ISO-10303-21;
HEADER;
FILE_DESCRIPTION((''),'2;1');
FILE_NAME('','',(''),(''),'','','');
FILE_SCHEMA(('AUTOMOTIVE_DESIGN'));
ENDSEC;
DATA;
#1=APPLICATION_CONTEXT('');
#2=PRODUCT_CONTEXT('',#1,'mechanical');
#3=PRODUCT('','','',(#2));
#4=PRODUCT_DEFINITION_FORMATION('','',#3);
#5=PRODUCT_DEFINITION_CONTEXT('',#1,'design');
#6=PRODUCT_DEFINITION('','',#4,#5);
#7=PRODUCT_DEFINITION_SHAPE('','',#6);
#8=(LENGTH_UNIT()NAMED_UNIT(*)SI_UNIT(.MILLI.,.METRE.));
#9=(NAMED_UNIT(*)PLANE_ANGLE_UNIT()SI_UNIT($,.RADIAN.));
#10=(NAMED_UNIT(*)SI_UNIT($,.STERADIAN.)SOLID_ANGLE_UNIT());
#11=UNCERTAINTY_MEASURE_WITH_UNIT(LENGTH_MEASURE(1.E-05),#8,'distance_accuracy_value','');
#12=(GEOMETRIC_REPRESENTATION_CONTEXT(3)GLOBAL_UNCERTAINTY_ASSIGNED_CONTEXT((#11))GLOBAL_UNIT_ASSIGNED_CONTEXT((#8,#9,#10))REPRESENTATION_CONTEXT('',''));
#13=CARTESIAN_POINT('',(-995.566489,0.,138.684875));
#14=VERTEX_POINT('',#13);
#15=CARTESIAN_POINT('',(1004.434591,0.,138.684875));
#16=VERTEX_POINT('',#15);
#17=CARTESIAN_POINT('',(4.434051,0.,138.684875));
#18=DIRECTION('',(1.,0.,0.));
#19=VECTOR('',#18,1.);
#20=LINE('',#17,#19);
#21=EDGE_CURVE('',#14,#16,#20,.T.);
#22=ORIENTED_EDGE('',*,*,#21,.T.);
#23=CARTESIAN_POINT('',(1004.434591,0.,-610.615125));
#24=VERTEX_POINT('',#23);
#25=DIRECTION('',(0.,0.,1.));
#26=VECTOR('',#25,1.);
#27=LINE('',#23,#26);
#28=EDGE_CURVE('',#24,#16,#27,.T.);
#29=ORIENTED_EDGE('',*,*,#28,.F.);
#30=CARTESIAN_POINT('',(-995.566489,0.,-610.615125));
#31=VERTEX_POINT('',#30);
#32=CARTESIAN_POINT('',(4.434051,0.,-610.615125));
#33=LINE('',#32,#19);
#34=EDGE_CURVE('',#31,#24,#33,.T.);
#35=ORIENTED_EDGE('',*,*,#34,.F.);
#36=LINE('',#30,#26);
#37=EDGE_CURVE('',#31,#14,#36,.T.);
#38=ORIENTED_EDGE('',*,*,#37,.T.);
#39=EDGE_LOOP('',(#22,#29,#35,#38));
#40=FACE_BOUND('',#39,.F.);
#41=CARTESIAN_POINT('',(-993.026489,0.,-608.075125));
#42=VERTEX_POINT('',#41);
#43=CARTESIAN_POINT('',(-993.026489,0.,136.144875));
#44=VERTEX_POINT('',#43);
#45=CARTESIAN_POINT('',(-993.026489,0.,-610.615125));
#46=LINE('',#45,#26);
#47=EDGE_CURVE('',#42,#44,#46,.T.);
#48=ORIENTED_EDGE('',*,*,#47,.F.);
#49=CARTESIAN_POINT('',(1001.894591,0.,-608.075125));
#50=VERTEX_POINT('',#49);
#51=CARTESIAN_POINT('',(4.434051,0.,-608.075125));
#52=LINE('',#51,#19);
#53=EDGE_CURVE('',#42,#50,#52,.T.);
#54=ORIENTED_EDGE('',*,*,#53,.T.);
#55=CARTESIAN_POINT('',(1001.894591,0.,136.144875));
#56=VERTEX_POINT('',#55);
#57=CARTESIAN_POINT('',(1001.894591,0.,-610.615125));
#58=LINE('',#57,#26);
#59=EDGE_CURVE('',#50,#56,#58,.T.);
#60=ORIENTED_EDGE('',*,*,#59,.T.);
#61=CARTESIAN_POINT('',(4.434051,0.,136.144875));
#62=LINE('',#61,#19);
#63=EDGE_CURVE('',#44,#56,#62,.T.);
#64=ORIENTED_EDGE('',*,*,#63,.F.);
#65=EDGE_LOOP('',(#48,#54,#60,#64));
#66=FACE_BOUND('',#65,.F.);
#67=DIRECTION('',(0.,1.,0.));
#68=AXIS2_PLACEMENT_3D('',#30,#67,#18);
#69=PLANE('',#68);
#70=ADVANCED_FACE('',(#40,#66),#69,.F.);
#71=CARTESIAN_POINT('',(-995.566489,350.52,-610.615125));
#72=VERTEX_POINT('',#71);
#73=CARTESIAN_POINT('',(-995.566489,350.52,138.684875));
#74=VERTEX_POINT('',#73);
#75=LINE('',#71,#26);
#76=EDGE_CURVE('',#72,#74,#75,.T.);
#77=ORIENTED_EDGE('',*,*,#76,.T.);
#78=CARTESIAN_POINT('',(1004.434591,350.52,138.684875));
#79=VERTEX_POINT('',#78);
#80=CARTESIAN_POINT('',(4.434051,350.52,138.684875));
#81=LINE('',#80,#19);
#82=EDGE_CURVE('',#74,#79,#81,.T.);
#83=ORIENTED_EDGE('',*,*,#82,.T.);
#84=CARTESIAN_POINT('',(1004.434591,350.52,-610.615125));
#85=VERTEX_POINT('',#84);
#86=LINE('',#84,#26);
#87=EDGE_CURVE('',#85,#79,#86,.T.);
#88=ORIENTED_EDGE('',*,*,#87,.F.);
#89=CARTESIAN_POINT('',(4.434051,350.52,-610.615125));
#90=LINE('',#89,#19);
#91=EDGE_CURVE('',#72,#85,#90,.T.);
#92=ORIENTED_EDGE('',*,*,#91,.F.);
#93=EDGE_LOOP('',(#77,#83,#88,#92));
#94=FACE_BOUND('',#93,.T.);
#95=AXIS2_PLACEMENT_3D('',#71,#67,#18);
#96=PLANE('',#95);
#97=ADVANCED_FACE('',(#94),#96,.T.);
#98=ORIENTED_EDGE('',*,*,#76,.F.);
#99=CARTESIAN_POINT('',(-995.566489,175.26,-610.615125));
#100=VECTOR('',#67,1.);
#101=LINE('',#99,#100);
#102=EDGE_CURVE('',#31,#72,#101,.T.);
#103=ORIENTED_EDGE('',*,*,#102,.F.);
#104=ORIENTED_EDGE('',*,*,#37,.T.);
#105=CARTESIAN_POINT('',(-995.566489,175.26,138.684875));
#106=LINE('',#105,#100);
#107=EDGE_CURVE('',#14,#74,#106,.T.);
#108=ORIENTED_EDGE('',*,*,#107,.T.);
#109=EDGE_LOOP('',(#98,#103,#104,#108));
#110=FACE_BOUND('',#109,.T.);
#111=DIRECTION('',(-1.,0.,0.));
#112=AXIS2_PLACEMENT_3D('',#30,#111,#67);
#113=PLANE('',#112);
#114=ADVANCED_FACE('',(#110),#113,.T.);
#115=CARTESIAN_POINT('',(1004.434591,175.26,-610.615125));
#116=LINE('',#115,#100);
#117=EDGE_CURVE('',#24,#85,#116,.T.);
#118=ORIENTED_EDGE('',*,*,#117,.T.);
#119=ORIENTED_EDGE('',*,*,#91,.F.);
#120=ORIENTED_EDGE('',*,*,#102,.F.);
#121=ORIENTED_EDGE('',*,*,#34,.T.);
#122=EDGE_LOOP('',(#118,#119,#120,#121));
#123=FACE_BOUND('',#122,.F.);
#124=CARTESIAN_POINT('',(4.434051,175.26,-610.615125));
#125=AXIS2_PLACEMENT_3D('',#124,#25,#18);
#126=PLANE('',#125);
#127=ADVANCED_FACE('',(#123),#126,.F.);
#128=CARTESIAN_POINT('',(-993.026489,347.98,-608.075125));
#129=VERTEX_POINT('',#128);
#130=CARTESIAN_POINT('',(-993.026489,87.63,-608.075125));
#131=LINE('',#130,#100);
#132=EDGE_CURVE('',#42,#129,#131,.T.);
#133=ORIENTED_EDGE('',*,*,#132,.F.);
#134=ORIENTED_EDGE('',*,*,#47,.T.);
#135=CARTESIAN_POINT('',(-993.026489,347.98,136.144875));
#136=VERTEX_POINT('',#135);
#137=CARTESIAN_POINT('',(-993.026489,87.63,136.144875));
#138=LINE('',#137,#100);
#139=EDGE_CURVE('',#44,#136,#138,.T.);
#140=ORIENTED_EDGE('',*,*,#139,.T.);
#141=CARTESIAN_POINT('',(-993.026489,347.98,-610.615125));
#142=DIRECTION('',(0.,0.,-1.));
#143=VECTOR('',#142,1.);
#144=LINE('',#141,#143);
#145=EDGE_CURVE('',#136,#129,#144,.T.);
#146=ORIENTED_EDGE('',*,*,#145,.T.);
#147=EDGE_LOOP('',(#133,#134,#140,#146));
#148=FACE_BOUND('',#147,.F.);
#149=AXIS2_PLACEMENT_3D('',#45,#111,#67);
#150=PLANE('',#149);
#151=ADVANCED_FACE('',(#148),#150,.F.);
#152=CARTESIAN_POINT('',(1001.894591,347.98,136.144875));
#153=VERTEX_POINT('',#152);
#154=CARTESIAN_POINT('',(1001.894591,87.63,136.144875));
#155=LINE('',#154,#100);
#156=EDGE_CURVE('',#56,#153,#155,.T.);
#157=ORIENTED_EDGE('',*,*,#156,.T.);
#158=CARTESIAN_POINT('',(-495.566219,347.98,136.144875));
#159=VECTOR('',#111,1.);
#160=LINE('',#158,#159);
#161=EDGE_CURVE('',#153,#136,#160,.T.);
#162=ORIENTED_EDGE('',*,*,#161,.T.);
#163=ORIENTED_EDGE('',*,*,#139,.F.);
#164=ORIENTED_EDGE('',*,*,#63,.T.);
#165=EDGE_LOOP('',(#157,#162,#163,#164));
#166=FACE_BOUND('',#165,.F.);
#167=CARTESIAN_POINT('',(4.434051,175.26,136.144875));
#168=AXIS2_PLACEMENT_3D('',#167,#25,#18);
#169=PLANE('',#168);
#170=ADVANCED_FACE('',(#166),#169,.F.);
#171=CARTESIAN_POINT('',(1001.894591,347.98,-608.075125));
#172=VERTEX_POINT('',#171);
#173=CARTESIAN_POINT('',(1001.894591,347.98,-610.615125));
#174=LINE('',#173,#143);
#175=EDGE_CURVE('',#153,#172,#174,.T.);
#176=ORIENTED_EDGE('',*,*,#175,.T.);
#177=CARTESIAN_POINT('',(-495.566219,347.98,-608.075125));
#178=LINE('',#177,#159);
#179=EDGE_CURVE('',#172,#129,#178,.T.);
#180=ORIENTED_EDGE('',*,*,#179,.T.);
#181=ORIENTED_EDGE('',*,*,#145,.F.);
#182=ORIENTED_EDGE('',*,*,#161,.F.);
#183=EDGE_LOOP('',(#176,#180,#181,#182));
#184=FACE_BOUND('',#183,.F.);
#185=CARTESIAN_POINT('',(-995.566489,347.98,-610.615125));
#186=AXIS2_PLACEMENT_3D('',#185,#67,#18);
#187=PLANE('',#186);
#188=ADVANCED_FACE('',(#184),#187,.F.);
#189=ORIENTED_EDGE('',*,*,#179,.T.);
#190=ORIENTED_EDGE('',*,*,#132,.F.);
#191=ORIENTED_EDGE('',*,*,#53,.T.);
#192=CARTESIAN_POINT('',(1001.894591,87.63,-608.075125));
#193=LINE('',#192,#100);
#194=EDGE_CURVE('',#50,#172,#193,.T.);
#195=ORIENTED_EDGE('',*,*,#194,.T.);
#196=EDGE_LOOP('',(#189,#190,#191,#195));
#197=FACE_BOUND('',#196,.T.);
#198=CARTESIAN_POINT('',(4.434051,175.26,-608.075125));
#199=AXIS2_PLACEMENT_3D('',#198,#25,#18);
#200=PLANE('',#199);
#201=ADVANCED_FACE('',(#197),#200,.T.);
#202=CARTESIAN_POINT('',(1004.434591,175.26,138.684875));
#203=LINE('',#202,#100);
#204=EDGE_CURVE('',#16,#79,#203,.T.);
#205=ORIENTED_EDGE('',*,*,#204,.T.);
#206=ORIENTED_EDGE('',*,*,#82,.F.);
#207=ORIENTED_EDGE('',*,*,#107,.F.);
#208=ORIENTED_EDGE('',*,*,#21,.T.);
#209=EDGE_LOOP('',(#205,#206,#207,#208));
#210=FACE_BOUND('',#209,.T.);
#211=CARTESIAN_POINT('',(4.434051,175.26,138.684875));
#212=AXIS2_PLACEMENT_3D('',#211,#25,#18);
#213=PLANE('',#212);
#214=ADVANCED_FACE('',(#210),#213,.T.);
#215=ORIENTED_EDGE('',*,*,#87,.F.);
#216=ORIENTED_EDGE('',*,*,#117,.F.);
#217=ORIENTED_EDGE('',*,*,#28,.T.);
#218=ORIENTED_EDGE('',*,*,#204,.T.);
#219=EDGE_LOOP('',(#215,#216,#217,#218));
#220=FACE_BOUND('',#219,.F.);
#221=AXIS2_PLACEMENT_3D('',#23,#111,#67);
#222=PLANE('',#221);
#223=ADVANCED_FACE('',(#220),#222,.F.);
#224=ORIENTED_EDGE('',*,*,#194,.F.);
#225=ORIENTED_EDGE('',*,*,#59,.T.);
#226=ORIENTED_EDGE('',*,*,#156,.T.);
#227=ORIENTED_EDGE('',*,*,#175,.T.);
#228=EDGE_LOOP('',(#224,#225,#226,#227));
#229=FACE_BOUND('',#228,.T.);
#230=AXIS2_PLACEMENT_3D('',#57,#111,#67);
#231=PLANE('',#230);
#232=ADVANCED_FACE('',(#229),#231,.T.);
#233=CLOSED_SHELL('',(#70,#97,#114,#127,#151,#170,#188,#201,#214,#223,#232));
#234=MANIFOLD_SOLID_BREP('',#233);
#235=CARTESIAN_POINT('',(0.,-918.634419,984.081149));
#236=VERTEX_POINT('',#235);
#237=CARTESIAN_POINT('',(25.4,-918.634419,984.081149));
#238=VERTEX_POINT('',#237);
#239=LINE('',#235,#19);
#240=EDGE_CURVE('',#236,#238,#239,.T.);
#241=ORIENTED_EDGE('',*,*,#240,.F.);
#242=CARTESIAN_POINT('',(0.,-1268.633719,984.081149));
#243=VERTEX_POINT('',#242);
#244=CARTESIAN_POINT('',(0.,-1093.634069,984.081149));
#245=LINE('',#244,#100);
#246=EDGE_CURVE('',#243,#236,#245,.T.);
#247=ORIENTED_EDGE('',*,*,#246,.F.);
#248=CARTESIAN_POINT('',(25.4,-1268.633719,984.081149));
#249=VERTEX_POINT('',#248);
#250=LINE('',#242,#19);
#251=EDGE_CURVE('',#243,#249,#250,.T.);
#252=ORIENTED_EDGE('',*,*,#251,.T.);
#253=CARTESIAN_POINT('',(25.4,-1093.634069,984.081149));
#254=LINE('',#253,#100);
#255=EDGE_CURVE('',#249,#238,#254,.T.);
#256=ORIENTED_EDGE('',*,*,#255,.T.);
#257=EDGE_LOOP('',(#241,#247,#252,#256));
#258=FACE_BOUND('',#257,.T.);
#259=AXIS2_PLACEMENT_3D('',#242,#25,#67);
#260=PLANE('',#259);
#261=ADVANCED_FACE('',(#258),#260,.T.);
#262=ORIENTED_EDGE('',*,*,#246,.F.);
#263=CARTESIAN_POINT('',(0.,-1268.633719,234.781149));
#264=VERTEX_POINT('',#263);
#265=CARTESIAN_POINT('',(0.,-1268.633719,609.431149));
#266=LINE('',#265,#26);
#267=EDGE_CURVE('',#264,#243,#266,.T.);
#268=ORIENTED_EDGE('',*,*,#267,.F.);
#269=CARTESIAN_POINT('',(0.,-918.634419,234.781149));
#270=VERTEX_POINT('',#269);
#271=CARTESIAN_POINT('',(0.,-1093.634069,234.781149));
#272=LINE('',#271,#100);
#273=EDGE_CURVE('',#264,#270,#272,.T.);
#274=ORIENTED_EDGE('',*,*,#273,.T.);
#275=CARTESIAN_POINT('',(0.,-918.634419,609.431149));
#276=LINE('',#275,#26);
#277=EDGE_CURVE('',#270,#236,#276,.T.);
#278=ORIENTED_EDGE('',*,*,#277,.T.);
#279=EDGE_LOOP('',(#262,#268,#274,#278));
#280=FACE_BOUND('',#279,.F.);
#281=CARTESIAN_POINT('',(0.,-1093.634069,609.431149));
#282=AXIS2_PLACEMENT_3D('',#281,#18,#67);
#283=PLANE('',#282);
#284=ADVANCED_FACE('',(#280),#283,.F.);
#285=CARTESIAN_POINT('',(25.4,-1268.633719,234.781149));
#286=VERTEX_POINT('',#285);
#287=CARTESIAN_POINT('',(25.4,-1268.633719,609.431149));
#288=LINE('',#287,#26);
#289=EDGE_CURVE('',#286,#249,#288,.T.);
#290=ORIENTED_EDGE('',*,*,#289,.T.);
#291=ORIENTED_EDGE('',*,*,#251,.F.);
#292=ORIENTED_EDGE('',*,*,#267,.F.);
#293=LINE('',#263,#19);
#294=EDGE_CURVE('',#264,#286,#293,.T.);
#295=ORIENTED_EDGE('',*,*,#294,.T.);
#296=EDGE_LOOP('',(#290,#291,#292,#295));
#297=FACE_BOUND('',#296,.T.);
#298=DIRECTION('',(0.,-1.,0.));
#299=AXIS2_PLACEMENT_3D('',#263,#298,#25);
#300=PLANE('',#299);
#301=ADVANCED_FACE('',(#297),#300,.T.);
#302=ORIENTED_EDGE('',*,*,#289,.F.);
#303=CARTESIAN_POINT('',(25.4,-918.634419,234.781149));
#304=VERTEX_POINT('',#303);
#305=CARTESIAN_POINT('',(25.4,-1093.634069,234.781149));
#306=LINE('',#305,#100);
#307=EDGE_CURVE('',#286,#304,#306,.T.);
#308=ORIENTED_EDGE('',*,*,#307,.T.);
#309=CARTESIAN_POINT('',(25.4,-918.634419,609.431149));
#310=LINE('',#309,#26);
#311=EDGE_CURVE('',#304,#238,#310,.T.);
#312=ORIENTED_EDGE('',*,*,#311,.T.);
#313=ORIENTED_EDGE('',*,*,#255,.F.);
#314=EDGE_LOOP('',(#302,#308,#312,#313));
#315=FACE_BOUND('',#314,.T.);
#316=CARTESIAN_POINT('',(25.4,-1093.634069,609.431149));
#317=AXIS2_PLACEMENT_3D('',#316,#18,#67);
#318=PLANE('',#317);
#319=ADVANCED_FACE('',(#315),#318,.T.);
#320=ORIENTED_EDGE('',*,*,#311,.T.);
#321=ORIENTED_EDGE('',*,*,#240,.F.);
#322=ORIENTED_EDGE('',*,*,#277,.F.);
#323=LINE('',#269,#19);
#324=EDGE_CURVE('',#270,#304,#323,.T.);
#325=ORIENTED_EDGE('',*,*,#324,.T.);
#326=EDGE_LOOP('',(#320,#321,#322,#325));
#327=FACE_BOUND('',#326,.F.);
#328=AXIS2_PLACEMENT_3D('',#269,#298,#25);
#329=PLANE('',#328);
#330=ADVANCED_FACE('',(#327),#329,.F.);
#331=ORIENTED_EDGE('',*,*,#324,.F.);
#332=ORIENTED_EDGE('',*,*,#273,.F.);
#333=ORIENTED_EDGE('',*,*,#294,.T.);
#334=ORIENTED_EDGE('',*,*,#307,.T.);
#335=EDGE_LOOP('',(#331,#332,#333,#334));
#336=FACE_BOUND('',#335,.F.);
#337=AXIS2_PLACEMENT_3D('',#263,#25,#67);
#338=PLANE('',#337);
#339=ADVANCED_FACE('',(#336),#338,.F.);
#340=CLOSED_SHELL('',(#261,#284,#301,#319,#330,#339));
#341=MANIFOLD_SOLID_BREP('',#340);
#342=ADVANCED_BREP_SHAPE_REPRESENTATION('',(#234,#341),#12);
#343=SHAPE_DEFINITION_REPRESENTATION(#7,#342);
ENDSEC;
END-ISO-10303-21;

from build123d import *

# Parameters (mm, degrees)
F1_E0_TOP_W = 2000.00108
F1_E0_TOP_H = 350.52
F2_DEPTH    = 749.3
F3_T        = -2.54
F4_W        = 349.9993
F4_H        = 749.3
F5_DEPTH    = 25.4


with BuildPart() as f2:
    # F1_E0_top (on explicit) → F2 (new body)
    with BuildSketch(Plane(origin=(-995.5664890079, 0, -610.6151250599), x_dir=(1, 0, 0), z_dir=(0, 0, 1))):
        with Locations((1000.00054, 175.26)):
            Rectangle(F1_E0_TOP_W, F1_E0_TOP_H)
    extrude(amount=F2_DEPTH)

    # F3
    f3_openings = [f2.faces().sort_by_distance(p)[0] for p in [
        (4.434051, 0, -235.965125),
    ]]
    offset(amount=F3_T, openings=f3_openings)


with BuildPart() as f5:
    # F4 (on Right) → F5 (new body)
    with BuildSketch(Plane.YZ):
        with Locations((-1093.6340689659, 609.4311486613)):
            Rectangle(F4_W, F4_H)
    extrude(amount=F5_DEPTH)


solid = Compound([f2.part, f5.part])
